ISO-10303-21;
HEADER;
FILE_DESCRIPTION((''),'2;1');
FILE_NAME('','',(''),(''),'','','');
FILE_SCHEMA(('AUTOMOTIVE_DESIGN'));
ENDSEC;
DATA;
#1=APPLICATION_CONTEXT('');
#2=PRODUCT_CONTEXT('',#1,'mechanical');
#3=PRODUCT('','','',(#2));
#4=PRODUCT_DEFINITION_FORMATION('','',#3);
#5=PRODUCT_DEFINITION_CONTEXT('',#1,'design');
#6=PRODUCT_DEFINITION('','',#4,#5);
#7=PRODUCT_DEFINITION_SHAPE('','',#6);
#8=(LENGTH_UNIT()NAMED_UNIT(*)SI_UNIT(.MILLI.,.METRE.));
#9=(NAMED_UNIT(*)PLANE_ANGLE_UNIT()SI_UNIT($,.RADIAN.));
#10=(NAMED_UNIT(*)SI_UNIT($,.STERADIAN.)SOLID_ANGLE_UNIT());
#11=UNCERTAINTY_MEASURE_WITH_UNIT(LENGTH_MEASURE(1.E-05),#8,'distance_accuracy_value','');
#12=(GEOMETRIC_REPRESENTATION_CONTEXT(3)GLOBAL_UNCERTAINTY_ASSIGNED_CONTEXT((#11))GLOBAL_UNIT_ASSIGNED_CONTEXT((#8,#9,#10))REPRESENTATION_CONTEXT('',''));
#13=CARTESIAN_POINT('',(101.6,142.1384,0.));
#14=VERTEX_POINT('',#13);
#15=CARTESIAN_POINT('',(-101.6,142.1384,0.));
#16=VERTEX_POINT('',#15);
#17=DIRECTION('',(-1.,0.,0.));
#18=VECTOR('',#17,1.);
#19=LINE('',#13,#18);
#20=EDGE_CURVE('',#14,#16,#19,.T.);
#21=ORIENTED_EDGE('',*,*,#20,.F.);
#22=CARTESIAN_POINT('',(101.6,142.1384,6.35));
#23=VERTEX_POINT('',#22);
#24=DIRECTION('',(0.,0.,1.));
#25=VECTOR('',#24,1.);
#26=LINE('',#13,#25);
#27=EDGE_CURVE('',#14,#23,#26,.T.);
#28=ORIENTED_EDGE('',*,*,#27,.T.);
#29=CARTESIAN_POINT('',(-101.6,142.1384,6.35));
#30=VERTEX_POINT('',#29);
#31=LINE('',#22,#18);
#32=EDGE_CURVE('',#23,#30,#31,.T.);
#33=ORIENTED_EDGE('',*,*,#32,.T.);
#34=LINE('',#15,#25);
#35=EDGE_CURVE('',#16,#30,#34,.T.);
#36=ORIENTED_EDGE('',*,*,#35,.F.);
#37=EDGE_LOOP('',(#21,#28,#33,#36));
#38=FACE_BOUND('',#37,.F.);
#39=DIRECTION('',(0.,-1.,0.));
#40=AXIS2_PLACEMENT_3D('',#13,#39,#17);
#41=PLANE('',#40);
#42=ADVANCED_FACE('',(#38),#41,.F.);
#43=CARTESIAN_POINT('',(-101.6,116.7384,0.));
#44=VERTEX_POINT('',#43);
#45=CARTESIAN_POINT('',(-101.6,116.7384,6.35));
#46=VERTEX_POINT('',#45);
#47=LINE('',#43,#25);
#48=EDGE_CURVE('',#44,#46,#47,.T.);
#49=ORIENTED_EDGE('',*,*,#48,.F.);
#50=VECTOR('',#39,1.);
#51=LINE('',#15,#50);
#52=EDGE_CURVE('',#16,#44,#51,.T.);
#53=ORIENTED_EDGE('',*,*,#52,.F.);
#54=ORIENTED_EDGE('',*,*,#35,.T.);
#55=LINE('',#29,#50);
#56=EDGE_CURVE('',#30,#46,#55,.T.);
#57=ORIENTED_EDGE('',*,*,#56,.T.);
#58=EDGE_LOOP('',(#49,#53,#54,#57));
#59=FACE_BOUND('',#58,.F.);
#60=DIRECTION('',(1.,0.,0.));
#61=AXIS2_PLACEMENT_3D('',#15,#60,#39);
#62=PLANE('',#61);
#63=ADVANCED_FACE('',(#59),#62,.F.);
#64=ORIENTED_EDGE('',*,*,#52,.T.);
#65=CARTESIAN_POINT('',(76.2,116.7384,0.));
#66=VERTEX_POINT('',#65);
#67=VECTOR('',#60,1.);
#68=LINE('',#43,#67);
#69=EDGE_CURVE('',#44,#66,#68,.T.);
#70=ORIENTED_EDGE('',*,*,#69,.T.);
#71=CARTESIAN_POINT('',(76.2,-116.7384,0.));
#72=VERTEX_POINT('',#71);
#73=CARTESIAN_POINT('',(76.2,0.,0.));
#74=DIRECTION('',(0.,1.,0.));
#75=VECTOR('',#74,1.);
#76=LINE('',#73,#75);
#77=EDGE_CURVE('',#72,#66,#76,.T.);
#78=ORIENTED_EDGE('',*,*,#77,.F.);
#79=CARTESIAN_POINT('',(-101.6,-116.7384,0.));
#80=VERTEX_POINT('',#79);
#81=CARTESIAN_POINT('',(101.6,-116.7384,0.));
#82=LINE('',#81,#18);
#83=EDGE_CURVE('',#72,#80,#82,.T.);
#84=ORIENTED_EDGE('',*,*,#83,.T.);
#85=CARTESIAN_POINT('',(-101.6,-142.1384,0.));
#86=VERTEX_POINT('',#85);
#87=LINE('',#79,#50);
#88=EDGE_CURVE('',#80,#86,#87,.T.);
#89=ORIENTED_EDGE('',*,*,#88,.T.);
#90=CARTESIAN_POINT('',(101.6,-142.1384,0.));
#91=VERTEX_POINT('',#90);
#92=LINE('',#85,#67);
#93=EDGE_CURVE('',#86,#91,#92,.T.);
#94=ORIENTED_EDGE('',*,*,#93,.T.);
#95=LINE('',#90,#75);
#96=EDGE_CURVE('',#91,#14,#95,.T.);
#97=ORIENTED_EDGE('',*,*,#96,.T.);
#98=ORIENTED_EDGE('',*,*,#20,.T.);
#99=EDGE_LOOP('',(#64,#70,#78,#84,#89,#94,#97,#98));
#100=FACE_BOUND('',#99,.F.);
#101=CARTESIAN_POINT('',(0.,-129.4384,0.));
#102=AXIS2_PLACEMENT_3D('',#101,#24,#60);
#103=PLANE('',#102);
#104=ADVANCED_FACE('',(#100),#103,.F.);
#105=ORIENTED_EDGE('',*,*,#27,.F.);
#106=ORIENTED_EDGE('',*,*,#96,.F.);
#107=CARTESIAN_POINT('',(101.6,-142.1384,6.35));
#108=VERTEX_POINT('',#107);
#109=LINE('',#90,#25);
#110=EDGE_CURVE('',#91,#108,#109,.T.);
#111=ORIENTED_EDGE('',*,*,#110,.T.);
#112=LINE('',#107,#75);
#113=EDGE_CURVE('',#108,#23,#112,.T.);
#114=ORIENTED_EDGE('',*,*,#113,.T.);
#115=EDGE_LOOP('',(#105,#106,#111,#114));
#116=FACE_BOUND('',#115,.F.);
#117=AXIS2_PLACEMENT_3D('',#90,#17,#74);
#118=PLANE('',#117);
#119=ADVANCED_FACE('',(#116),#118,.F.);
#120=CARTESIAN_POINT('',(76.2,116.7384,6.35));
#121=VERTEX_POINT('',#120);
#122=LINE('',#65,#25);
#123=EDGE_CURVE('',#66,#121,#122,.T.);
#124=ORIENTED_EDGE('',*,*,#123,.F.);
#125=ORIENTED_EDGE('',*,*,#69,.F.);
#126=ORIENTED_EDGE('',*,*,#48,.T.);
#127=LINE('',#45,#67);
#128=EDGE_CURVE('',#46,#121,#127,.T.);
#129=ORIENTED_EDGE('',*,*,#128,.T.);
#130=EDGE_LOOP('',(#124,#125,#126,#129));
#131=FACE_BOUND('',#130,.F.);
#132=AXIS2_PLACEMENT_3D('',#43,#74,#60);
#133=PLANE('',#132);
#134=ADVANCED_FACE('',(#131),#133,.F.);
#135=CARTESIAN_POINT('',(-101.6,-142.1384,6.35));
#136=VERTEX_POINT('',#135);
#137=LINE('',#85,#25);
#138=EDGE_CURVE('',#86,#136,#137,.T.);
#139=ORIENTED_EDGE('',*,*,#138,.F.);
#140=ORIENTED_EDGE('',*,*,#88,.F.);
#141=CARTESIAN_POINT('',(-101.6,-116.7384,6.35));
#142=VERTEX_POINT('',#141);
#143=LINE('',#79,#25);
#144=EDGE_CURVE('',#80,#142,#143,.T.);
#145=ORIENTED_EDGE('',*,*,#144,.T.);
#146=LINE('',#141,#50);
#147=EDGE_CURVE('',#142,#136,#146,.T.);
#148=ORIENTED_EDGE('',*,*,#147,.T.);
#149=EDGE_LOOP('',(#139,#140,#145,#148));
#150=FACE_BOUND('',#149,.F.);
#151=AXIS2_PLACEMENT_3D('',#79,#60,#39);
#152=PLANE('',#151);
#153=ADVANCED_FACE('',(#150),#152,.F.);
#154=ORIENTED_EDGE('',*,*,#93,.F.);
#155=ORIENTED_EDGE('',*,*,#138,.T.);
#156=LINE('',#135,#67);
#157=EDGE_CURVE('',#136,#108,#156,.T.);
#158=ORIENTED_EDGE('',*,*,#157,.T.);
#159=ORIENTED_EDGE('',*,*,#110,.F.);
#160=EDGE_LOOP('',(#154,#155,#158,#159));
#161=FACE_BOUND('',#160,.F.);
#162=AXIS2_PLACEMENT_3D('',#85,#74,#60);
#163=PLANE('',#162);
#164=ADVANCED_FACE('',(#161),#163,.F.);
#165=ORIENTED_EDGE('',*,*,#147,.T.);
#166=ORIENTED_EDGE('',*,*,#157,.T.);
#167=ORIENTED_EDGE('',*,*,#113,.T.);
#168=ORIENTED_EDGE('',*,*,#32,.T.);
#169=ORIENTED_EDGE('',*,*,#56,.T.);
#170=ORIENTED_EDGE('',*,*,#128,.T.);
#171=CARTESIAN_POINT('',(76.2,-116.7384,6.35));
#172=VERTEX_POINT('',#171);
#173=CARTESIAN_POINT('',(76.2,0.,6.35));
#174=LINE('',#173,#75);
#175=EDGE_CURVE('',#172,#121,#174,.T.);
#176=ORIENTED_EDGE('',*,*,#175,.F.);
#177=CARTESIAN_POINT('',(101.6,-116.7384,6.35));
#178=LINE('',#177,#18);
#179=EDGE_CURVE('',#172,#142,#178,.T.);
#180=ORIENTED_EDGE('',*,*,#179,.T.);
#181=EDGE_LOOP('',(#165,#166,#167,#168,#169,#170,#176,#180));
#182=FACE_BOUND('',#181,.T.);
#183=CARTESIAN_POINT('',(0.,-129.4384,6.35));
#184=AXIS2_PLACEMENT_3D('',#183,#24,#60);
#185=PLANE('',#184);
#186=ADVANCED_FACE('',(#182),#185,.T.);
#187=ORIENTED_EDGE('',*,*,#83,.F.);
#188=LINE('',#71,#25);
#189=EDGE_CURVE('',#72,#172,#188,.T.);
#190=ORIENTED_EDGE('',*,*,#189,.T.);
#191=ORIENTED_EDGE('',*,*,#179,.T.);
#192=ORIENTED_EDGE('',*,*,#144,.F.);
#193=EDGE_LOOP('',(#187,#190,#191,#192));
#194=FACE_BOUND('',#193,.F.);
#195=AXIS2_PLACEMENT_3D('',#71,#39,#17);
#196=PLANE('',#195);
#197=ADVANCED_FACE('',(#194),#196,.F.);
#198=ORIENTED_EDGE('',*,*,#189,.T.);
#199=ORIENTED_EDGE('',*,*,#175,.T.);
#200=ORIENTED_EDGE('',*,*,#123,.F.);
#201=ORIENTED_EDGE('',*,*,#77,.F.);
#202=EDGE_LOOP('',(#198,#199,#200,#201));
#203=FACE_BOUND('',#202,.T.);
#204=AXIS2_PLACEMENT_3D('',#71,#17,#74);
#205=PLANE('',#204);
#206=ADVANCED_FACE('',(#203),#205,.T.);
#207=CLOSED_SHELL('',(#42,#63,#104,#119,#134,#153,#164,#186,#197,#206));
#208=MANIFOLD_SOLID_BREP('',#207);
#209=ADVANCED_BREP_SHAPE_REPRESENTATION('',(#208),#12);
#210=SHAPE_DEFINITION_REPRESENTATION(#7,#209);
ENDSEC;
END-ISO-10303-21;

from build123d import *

# Parameters (mm, degrees)
F0_W     = 12.7
F0_H     = 233.4768
F1_DEPTH = 6.35


# Not quite as in the source:
# - a feature names something its author has since deleted; it is built from what else it names


with BuildPart() as f1:
    # F0 (on Top) → F1 (new body)
    with BuildSketch(Plane.XY):
        Polygon((88.9, -116.7384), (76.2, -116.7384), (-76.2, -116.7384), (-101.6, -116.7384), (-101.6, -142.1384), (101.6, -142.1384), (101.6, -116.7384), align=None)
        Polygon((-76.2, 116.7384), (76.2, 116.7384), (88.9, 116.7384), (101.6, 116.7384), (101.6, 142.1384), (-101.6, 142.1384), (-101.6, 116.7384), align=None)
        with Locations((95.25, 0)):
            Rectangle(F0_W, F0_H)
        with Locations((82.55, 0)):
            Rectangle(F0_W, F0_H)
    extrude(amount=F1_DEPTH)


solid = f1.part
